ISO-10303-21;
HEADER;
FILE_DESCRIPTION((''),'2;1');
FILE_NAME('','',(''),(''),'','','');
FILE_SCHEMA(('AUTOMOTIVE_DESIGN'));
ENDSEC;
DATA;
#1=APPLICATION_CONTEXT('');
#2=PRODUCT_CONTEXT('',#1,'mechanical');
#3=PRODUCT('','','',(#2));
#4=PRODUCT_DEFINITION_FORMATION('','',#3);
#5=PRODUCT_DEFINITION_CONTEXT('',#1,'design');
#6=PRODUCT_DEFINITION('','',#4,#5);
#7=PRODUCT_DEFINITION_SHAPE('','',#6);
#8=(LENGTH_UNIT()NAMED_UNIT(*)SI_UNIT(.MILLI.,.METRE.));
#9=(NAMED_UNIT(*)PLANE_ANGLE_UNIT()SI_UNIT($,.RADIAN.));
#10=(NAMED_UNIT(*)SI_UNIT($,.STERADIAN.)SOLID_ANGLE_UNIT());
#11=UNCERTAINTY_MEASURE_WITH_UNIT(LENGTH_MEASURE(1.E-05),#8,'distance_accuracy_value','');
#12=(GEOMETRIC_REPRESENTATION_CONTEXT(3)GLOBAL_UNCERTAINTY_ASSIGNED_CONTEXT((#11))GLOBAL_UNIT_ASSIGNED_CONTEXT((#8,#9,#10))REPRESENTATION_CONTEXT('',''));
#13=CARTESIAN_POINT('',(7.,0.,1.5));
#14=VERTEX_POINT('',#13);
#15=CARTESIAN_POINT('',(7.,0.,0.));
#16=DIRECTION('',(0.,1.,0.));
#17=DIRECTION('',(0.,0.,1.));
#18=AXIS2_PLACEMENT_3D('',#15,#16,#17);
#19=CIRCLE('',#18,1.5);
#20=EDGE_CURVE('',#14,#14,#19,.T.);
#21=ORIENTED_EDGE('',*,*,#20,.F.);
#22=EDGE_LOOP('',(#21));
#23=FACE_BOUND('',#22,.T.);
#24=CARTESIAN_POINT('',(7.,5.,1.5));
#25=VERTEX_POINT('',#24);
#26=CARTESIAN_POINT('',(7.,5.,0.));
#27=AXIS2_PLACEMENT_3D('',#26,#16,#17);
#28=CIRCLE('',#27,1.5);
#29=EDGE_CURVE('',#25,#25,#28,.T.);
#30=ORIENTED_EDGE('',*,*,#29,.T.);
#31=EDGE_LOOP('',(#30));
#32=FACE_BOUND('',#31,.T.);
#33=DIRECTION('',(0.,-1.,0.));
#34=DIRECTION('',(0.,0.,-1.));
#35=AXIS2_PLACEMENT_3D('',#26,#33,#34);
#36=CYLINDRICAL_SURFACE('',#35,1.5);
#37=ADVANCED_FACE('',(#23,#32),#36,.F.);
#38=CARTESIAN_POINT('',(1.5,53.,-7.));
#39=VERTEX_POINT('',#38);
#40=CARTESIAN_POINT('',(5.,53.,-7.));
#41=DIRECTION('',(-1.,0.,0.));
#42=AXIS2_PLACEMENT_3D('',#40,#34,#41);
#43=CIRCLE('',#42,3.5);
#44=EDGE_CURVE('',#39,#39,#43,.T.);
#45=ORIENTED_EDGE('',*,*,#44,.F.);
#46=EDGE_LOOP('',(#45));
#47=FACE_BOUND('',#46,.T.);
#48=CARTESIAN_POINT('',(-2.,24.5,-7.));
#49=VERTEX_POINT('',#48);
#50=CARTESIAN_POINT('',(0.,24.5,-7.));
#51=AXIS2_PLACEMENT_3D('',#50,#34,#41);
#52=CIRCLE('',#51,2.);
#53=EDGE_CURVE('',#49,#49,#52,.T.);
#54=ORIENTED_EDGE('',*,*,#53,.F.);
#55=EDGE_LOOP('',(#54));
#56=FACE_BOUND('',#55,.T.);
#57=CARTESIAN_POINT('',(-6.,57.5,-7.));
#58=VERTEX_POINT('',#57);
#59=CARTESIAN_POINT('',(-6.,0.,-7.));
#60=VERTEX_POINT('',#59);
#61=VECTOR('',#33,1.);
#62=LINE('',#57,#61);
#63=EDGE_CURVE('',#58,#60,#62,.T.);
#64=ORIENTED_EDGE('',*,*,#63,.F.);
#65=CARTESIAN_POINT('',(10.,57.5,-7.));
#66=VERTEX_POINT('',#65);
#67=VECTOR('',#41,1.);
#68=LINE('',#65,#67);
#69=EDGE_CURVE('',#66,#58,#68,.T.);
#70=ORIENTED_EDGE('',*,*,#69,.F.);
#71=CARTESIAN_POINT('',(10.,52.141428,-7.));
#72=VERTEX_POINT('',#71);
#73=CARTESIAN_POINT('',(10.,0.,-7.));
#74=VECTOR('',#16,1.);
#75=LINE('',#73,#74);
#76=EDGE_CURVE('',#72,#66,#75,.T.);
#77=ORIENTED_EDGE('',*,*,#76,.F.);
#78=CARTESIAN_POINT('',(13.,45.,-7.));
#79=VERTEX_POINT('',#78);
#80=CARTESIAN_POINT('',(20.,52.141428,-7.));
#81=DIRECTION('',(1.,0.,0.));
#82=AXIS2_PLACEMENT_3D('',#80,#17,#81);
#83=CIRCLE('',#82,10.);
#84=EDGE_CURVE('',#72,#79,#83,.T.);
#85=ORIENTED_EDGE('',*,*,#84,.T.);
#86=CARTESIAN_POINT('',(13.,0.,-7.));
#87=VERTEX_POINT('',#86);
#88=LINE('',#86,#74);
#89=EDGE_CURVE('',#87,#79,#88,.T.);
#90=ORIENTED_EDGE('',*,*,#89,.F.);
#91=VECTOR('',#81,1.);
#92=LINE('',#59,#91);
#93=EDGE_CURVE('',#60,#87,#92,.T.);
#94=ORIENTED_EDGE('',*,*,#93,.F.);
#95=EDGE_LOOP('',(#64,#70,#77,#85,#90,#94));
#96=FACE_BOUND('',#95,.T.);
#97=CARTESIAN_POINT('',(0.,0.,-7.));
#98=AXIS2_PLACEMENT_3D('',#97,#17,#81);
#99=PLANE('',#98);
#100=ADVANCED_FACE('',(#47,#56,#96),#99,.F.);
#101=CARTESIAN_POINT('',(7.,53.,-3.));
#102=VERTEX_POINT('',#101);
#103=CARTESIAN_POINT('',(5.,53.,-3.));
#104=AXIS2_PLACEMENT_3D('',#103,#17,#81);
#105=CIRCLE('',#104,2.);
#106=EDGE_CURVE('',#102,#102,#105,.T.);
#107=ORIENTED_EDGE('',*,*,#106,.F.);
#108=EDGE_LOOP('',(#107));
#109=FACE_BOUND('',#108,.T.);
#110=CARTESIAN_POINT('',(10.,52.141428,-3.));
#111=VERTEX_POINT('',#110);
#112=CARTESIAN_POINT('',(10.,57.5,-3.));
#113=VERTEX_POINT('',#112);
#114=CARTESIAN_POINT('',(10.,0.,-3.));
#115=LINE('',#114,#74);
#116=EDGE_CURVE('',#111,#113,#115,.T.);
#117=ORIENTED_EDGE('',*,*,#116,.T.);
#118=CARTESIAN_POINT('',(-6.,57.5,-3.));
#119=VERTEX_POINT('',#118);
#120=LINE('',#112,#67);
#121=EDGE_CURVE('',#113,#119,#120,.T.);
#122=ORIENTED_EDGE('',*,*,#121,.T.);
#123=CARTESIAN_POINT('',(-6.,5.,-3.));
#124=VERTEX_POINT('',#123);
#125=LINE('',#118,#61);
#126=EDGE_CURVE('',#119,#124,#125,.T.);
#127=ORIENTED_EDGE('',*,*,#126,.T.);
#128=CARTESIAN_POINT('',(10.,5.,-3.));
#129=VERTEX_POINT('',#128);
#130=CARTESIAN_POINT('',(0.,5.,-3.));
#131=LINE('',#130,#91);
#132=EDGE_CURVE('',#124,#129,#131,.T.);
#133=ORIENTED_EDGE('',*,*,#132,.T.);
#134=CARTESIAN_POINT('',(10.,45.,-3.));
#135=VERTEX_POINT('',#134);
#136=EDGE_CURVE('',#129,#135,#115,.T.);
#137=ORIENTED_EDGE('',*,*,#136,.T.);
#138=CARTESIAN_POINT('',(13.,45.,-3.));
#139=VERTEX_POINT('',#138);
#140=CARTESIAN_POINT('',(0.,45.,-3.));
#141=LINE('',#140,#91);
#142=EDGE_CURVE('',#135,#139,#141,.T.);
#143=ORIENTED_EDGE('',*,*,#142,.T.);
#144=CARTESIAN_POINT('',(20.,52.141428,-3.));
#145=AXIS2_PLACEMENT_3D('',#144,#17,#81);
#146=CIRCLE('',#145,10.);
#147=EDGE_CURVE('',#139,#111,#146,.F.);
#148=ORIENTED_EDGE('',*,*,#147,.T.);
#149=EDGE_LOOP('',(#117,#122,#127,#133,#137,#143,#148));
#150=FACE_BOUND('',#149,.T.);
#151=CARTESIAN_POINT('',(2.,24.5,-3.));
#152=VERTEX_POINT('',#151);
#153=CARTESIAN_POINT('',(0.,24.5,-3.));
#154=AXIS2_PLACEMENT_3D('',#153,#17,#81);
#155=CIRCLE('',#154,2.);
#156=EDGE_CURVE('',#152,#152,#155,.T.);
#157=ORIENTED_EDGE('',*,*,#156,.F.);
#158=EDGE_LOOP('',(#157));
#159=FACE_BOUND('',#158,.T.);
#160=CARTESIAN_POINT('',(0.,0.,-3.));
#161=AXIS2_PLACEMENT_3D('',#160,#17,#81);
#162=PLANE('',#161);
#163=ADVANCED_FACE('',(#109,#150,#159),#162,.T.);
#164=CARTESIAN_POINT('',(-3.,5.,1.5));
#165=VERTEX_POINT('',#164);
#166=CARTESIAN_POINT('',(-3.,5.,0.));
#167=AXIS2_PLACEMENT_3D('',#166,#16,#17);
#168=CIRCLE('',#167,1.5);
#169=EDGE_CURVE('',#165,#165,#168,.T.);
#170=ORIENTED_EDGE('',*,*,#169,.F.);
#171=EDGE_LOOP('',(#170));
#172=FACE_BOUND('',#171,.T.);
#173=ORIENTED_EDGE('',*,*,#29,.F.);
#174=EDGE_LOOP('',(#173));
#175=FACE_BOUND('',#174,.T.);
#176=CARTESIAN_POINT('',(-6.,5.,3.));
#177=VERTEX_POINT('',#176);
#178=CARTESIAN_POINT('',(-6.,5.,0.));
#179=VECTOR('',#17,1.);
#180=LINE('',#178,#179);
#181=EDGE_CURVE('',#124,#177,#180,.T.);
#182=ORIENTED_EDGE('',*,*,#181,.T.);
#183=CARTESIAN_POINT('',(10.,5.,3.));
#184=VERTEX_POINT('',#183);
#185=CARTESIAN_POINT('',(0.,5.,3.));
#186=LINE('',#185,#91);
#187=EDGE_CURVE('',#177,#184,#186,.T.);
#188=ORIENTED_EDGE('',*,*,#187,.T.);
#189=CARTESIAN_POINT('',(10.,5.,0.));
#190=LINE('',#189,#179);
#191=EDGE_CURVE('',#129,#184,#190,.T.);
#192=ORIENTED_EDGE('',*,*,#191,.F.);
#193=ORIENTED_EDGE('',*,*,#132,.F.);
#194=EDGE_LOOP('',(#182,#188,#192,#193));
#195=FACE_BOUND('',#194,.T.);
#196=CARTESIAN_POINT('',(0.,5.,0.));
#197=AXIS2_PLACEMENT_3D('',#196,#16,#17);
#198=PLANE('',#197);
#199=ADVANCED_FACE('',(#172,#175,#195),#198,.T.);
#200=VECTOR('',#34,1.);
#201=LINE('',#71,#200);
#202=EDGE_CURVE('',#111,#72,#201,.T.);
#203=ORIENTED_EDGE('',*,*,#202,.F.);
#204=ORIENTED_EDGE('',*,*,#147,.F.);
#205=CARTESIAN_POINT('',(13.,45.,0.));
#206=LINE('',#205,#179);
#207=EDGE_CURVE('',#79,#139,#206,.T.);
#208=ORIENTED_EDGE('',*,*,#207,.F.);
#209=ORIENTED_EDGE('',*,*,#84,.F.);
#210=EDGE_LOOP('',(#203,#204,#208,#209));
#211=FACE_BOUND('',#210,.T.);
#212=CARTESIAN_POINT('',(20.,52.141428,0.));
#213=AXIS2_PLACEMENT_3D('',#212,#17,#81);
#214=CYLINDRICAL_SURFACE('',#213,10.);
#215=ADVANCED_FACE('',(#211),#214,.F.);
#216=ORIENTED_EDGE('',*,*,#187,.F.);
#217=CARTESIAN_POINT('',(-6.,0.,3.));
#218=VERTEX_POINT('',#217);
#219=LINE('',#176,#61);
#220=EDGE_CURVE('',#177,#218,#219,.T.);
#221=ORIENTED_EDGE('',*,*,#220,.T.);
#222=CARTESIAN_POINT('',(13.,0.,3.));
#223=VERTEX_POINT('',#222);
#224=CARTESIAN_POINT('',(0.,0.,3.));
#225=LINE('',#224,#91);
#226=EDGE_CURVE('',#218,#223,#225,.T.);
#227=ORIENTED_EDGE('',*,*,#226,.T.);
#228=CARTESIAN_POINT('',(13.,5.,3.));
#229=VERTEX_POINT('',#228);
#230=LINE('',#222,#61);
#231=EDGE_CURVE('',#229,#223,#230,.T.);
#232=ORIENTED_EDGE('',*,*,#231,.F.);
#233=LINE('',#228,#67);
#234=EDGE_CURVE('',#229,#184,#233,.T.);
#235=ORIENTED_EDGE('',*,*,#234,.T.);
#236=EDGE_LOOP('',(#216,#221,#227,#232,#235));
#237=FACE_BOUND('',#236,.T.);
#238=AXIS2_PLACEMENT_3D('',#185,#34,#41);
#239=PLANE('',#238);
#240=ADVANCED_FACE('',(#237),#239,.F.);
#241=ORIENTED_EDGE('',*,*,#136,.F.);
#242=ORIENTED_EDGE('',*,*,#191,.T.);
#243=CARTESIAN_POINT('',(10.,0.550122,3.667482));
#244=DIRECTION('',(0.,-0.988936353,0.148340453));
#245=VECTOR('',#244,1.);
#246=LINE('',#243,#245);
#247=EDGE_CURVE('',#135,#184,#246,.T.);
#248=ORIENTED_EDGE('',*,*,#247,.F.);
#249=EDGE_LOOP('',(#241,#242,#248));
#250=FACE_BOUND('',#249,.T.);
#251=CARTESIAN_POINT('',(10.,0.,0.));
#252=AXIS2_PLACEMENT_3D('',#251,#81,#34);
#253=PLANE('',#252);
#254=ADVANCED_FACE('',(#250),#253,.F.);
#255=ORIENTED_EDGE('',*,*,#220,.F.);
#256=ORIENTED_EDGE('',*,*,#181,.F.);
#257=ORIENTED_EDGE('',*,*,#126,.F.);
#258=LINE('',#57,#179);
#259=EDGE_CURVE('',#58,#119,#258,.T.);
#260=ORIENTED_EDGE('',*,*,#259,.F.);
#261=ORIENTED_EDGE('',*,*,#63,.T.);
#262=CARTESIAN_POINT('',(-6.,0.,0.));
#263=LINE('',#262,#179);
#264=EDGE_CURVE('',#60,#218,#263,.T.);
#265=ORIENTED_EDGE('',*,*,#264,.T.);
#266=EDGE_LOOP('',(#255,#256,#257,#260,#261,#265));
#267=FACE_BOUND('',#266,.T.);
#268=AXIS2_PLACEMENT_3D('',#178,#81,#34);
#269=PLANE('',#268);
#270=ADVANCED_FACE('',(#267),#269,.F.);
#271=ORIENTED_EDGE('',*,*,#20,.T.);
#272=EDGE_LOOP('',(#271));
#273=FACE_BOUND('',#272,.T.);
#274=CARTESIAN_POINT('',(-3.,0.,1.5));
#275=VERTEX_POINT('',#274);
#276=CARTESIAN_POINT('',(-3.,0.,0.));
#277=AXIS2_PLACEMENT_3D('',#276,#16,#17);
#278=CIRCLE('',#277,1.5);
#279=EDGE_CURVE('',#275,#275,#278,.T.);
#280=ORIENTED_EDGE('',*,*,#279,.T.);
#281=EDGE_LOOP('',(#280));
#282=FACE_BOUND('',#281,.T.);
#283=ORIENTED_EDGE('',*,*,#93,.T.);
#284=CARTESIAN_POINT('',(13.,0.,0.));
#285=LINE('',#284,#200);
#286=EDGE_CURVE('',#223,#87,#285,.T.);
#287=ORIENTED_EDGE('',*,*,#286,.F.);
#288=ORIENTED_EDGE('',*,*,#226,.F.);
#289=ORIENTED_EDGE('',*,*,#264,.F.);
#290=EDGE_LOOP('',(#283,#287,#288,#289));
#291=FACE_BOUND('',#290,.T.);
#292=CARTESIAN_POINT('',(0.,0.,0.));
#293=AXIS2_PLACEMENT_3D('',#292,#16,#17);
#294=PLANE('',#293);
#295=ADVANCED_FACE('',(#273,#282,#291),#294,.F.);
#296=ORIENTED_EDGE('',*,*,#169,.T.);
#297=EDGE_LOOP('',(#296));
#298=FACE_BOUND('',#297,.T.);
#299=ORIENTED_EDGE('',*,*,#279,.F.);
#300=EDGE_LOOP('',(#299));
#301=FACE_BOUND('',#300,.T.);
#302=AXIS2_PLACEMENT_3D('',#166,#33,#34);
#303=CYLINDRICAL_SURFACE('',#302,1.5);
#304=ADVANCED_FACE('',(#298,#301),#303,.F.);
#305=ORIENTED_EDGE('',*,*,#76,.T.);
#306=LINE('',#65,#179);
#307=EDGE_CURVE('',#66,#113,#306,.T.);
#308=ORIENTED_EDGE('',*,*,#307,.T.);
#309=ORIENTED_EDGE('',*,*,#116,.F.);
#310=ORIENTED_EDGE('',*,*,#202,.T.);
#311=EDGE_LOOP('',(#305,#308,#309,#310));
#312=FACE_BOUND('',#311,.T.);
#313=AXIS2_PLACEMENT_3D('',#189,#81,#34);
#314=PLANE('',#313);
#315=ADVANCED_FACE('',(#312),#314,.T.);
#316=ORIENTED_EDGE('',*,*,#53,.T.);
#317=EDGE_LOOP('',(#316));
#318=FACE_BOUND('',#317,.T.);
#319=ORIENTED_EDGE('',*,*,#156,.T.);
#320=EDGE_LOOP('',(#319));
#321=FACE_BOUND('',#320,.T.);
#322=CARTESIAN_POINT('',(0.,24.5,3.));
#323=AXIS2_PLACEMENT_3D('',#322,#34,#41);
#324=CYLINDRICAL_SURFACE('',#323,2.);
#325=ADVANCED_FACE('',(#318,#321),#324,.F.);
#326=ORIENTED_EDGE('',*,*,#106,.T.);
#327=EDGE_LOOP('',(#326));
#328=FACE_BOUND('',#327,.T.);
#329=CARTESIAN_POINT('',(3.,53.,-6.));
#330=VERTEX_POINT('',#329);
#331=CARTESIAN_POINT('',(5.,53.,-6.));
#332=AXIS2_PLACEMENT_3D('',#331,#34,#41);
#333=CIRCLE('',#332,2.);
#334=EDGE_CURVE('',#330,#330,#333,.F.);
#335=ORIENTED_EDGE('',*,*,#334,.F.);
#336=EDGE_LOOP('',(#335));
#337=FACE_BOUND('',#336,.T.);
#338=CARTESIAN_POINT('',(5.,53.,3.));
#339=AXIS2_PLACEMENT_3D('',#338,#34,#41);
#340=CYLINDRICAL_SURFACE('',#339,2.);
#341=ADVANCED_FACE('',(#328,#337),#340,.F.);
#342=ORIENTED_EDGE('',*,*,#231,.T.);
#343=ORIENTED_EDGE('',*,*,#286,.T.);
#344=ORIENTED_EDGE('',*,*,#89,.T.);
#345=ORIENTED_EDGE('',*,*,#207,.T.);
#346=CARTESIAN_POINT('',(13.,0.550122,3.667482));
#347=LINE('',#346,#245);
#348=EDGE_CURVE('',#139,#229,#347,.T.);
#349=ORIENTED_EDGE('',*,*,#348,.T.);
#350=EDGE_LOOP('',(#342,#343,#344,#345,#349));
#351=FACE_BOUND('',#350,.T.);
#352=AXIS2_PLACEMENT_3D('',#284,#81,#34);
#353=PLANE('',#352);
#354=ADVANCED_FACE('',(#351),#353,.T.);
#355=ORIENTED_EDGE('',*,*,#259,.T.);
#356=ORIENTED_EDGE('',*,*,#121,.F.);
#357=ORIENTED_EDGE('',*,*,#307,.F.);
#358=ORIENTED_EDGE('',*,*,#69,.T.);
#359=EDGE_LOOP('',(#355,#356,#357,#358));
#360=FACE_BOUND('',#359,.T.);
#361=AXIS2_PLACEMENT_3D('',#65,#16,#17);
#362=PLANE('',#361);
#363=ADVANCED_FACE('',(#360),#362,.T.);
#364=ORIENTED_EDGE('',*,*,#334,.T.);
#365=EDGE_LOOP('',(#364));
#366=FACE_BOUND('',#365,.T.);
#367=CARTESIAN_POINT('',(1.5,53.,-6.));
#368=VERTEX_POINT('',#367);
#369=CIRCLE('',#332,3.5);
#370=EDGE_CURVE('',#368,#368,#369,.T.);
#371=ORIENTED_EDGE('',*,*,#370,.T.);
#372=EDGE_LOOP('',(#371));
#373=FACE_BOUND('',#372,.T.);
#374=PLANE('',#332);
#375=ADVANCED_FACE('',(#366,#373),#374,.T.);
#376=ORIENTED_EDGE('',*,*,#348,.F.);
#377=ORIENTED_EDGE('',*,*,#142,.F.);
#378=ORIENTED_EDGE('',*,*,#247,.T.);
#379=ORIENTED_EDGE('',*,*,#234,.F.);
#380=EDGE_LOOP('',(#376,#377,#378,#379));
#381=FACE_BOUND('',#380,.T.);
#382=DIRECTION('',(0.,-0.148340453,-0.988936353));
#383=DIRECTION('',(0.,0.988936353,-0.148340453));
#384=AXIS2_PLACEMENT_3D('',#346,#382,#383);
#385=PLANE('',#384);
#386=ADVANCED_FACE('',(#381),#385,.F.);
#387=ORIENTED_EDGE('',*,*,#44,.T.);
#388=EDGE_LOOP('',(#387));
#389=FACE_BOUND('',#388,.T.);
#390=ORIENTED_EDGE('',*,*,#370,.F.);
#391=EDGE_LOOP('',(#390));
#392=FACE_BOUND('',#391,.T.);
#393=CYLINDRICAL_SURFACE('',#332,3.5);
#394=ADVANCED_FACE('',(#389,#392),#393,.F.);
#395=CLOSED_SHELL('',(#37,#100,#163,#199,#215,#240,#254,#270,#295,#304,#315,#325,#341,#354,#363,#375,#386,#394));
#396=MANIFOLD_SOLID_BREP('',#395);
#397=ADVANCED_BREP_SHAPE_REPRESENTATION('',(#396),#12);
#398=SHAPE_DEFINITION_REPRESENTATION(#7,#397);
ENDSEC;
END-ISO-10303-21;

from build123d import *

# Parameters (mm, degrees)
SKETCH_1_W          = 16
SKETCH_1_H          = 6
SKETCH_1_R          = 1.5
EXTRUDE_1_DEPTH     = 5
SKETCH_2_W          = 16
SKETCH_2_H          = 57.5
EXTRUDE_2_DEPTH     = 4
SKETCH_3_R          = 2
CUT_EXTRUDE_1_DEPTH = 60.213596412
SKETCH_4_R          = 2
CUT_EXTRUDE_2_DEPTH = 60.213596412
SKETCH_5_R          = 3.5
CUT_EXTRUDE_3_DEPTH = 1
EXTRUDE_3_DEPTH     = 3
FILLET_1_R          = 10


with BuildPart() as part:
    # 草图1 → 凸台-拉伸1 (new body)
    with BuildSketch(Plane(origin=(0, 0, 0), x_dir=(1, 0, 0), z_dir=(0, 1, 0))):
        with Locations((2, 0)):
            Rectangle(SKETCH_1_W, SKETCH_1_H)
        with Locations(Location((-3, 0, 0), (0, 0, 270))):
            Circle(SKETCH_1_R, mode=Mode.SUBTRACT)
        with Locations(Location((7, 0, 0), (0, 0, 270))):
            Circle(SKETCH_1_R, mode=Mode.SUBTRACT)
    extrude(amount=EXTRUDE_1_DEPTH)

    # 草图2 → 凸台-拉伸2 (add)
    with BuildSketch(Plane(origin=(0, 0, -3), x_dir=(-1, 0, 0), z_dir=(0, 0, -1))):
        with Locations((-2, 28.75)):
            Rectangle(SKETCH_2_W, SKETCH_2_H)
    extrude(amount=EXTRUDE_2_DEPTH)

    # 草图3 → 切除-拉伸1 (cut, through all)
    with BuildSketch(Plane(origin=(0, 0, -7), x_dir=(-1, 0, 0), z_dir=(0, 0, -1))):
        with Locations((-5, 53)):
            Circle(SKETCH_3_R)
    extrude(amount=-CUT_EXTRUDE_1_DEPTH, mode=Mode.SUBTRACT)

    # 草图4 → 切除-拉伸2 (cut, through all)
    with BuildSketch(Plane(origin=(0, 0, -7), x_dir=(-1, 0, 0), z_dir=(0, 0, -1))):
        with Locations((0, 24.5)):
            Circle(SKETCH_4_R)
    extrude(amount=-CUT_EXTRUDE_2_DEPTH, mode=Mode.SUBTRACT)

    # 草图5 → 切除-拉伸3 (cut)
    with BuildSketch(Plane(origin=(0, 0, -7), x_dir=(-1, 0, 0), z_dir=(0, 0, -1))):
        with Locations((-5, 53)):
            Circle(SKETCH_5_R)
    extrude(amount=-CUT_EXTRUDE_3_DEPTH, mode=Mode.SUBTRACT)

    # 草图6 → 凸台-拉伸3 (add)
    with BuildSketch(Plane(origin=(10, 0, 0), x_dir=(0, 0, -1), z_dir=(1, 0, 0))):
        Polygon((3, 45), (3, 5), (-3, 5), (-3, 0), (7, 0), (7, 45), align=None)
        Polygon((-3, 5), (3, 5), (3, 45), align=None)
    extrude(amount=EXTRUDE_3_DEPTH)

    # 圆角1
    # the kernel refuses this fillet: 10 mm, written as the material it adds along each edge
    with BuildSketch(Plane(origin=(10, 45, -7), x_dir=(0, 1, 0), z_dir=(0, 0, 1))) as fillet_1_piece_1:
        with BuildLine():
            CenterArc((7.141428429, -10), FILLET_1_R, 90, 45.572995999)
            Line((0, -3), (0, 0))
            Line((0, 0), (7.141428429, 0))
        make_face()
    extrude(amount=4)


solid = part.part
